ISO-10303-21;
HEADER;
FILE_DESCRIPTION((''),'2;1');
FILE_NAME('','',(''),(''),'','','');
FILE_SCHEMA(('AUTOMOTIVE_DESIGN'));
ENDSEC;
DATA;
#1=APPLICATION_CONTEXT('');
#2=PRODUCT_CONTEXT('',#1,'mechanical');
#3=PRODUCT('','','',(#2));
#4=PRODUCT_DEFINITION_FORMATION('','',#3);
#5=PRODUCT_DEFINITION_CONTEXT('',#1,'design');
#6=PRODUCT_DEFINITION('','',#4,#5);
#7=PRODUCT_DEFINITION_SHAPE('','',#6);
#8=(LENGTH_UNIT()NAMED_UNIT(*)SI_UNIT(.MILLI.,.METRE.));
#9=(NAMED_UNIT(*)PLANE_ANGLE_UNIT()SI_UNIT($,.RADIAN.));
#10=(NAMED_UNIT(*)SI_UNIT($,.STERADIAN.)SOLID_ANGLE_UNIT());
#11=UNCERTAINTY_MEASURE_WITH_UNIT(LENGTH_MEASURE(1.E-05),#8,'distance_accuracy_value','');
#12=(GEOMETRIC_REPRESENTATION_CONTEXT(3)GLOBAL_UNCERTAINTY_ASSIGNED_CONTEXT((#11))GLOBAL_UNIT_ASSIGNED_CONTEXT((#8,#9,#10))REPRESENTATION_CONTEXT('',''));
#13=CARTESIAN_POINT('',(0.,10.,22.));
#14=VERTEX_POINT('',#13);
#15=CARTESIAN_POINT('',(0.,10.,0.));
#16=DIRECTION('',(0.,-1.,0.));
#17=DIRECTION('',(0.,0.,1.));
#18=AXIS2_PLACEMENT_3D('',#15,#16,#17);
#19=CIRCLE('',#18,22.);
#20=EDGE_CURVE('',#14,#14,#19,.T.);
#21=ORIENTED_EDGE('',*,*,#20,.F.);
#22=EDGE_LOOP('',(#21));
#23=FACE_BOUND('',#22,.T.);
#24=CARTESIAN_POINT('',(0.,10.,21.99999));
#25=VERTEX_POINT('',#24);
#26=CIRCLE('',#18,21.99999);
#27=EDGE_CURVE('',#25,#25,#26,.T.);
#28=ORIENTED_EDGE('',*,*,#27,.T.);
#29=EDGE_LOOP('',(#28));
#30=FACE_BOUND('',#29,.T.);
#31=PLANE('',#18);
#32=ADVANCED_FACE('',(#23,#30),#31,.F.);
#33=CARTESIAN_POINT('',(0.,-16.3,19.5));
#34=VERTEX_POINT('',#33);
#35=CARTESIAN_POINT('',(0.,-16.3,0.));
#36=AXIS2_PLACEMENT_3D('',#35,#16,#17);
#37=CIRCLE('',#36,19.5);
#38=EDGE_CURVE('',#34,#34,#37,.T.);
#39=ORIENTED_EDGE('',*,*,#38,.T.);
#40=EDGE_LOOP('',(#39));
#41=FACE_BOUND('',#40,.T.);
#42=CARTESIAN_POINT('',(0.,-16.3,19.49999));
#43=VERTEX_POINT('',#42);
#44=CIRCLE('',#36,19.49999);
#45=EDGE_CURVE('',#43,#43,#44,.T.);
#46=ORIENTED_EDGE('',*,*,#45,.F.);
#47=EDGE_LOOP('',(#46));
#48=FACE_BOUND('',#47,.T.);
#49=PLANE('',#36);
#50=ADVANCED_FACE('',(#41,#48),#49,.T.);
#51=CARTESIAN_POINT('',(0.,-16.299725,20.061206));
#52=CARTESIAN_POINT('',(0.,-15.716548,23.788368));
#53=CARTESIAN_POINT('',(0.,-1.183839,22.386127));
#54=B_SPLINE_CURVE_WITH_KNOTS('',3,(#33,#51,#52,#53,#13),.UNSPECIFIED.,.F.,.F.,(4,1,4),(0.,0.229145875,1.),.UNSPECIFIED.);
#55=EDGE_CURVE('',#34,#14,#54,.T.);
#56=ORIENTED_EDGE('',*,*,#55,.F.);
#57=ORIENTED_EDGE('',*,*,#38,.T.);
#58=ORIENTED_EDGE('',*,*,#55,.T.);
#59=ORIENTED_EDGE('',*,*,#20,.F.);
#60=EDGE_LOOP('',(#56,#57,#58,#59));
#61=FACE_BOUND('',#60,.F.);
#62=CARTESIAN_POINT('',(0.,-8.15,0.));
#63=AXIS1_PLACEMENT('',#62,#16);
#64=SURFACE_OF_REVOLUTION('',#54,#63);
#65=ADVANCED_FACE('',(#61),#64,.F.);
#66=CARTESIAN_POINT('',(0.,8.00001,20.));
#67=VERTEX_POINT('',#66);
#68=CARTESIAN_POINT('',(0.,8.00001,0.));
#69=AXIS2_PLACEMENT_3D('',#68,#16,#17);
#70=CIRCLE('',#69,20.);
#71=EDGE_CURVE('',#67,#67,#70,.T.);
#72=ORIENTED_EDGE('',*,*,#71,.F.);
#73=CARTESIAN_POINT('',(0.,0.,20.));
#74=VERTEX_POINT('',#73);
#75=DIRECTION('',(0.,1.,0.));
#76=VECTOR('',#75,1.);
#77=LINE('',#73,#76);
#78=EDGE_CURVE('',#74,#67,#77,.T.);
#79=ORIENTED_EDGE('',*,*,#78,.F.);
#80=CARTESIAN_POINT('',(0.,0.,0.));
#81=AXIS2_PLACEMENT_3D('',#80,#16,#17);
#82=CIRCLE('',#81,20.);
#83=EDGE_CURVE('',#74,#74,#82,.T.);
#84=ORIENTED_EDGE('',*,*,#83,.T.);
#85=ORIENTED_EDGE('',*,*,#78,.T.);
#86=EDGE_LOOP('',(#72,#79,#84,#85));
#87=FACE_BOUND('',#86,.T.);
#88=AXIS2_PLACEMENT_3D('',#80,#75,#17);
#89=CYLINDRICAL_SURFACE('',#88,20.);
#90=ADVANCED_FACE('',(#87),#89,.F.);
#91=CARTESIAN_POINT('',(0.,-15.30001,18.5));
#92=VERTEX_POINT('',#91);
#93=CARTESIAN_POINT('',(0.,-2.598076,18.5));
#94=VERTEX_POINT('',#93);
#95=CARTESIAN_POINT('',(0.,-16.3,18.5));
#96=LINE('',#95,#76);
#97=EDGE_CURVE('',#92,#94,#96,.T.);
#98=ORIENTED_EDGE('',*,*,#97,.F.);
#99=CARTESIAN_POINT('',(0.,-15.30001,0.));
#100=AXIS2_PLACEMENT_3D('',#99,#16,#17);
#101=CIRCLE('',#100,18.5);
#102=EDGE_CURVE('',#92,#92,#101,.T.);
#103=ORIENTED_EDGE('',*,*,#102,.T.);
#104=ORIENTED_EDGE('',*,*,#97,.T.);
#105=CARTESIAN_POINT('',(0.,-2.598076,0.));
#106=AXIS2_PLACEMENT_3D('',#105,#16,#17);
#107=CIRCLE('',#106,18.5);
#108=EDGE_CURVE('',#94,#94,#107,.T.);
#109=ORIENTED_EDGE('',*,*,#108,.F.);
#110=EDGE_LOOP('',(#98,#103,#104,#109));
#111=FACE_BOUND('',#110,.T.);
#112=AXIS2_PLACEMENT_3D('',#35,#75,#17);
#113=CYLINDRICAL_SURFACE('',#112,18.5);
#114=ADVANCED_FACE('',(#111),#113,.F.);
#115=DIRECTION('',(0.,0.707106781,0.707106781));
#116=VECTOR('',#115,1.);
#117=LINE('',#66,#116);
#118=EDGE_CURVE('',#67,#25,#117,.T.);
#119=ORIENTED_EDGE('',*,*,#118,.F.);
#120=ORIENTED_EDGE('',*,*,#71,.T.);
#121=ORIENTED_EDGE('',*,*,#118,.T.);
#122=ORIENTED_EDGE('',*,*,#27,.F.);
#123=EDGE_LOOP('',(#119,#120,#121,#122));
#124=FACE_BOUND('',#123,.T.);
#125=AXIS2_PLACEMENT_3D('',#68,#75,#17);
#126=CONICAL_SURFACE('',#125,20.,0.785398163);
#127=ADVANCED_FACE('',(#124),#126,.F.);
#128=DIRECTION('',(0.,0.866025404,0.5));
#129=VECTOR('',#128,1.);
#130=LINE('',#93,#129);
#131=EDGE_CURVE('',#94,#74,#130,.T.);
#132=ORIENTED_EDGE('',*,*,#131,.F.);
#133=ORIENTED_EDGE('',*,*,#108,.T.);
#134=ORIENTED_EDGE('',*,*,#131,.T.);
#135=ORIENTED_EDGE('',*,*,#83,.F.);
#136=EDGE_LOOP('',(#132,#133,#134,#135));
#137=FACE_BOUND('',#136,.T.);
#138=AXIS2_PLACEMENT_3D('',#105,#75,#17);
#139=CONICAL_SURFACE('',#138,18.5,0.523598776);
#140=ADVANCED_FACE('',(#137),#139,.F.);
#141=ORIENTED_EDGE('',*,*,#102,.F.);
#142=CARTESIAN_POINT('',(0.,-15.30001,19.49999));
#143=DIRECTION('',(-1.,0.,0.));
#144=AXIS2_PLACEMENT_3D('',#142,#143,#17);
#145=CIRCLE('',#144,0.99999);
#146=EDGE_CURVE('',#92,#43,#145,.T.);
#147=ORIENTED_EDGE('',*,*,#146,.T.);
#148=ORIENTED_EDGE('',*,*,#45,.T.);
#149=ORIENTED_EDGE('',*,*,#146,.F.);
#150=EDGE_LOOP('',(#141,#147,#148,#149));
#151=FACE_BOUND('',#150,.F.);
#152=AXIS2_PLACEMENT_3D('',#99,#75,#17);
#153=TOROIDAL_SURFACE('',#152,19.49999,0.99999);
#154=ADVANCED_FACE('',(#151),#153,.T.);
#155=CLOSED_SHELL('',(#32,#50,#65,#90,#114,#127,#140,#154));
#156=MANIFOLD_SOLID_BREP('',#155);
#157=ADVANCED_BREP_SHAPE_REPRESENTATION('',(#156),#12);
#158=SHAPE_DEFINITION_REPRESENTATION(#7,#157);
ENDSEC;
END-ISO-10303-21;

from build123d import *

# Parameters (mm, degrees)
F2_R    = 0.99999
F3_SIZE = 1.99999


# Not quite as in the source:
# - a fillet or chamfer is up to 0.001 mm smaller than in the source, because OpenCascade refuses the exact size


with BuildPart() as f1:
    # F0 (on Right) → F1 (revolve)
    with BuildSketch(Plane.YZ):
        with BuildLine():
            Line((-16.3, 18.5), (-2.5980762114, 18.5))
            Line((-2.5980762114, 18.5), (0, 20))
            Line((0, 20), (10, 20))
            Line((10, 20), (10, 22))
            add(Edge.make_bspline(
                [(-16.3, 19.5), (-16.2997247245, 20.0612064454), (-15.716548184, 23.7883678508), (-1.1838388212, 22.3861274398), (10, 22)],
                knots=[0, 0, 0, 0, 0.2291458751, 1, 1, 1, 1], degree=3))
            Line((-16.3, 19.5), (-16.3, 18.5))
        make_face()
    revolve(axis=Axis((0, -8.15, 0), (0, -1, 0)))

    # F2 (radius 1 in the source; OpenCascade refuses exactly that, so slightly less here)
    f2_edges = [f1.edges().sort_by_distance(p)[0] for p in [
        (0, -16.3, -18.5),
    ]]
    fillet(f2_edges, radius=F2_R)

    # F3 (size 2 in the source; OpenCascade refuses exactly that, so slightly less here)
    f3_edges = [f1.edges().sort_by_distance(p)[0] for p in [
        (0, 10, -20),
    ]]
    chamfer(f3_edges, length=F3_SIZE)


solid = f1.part
